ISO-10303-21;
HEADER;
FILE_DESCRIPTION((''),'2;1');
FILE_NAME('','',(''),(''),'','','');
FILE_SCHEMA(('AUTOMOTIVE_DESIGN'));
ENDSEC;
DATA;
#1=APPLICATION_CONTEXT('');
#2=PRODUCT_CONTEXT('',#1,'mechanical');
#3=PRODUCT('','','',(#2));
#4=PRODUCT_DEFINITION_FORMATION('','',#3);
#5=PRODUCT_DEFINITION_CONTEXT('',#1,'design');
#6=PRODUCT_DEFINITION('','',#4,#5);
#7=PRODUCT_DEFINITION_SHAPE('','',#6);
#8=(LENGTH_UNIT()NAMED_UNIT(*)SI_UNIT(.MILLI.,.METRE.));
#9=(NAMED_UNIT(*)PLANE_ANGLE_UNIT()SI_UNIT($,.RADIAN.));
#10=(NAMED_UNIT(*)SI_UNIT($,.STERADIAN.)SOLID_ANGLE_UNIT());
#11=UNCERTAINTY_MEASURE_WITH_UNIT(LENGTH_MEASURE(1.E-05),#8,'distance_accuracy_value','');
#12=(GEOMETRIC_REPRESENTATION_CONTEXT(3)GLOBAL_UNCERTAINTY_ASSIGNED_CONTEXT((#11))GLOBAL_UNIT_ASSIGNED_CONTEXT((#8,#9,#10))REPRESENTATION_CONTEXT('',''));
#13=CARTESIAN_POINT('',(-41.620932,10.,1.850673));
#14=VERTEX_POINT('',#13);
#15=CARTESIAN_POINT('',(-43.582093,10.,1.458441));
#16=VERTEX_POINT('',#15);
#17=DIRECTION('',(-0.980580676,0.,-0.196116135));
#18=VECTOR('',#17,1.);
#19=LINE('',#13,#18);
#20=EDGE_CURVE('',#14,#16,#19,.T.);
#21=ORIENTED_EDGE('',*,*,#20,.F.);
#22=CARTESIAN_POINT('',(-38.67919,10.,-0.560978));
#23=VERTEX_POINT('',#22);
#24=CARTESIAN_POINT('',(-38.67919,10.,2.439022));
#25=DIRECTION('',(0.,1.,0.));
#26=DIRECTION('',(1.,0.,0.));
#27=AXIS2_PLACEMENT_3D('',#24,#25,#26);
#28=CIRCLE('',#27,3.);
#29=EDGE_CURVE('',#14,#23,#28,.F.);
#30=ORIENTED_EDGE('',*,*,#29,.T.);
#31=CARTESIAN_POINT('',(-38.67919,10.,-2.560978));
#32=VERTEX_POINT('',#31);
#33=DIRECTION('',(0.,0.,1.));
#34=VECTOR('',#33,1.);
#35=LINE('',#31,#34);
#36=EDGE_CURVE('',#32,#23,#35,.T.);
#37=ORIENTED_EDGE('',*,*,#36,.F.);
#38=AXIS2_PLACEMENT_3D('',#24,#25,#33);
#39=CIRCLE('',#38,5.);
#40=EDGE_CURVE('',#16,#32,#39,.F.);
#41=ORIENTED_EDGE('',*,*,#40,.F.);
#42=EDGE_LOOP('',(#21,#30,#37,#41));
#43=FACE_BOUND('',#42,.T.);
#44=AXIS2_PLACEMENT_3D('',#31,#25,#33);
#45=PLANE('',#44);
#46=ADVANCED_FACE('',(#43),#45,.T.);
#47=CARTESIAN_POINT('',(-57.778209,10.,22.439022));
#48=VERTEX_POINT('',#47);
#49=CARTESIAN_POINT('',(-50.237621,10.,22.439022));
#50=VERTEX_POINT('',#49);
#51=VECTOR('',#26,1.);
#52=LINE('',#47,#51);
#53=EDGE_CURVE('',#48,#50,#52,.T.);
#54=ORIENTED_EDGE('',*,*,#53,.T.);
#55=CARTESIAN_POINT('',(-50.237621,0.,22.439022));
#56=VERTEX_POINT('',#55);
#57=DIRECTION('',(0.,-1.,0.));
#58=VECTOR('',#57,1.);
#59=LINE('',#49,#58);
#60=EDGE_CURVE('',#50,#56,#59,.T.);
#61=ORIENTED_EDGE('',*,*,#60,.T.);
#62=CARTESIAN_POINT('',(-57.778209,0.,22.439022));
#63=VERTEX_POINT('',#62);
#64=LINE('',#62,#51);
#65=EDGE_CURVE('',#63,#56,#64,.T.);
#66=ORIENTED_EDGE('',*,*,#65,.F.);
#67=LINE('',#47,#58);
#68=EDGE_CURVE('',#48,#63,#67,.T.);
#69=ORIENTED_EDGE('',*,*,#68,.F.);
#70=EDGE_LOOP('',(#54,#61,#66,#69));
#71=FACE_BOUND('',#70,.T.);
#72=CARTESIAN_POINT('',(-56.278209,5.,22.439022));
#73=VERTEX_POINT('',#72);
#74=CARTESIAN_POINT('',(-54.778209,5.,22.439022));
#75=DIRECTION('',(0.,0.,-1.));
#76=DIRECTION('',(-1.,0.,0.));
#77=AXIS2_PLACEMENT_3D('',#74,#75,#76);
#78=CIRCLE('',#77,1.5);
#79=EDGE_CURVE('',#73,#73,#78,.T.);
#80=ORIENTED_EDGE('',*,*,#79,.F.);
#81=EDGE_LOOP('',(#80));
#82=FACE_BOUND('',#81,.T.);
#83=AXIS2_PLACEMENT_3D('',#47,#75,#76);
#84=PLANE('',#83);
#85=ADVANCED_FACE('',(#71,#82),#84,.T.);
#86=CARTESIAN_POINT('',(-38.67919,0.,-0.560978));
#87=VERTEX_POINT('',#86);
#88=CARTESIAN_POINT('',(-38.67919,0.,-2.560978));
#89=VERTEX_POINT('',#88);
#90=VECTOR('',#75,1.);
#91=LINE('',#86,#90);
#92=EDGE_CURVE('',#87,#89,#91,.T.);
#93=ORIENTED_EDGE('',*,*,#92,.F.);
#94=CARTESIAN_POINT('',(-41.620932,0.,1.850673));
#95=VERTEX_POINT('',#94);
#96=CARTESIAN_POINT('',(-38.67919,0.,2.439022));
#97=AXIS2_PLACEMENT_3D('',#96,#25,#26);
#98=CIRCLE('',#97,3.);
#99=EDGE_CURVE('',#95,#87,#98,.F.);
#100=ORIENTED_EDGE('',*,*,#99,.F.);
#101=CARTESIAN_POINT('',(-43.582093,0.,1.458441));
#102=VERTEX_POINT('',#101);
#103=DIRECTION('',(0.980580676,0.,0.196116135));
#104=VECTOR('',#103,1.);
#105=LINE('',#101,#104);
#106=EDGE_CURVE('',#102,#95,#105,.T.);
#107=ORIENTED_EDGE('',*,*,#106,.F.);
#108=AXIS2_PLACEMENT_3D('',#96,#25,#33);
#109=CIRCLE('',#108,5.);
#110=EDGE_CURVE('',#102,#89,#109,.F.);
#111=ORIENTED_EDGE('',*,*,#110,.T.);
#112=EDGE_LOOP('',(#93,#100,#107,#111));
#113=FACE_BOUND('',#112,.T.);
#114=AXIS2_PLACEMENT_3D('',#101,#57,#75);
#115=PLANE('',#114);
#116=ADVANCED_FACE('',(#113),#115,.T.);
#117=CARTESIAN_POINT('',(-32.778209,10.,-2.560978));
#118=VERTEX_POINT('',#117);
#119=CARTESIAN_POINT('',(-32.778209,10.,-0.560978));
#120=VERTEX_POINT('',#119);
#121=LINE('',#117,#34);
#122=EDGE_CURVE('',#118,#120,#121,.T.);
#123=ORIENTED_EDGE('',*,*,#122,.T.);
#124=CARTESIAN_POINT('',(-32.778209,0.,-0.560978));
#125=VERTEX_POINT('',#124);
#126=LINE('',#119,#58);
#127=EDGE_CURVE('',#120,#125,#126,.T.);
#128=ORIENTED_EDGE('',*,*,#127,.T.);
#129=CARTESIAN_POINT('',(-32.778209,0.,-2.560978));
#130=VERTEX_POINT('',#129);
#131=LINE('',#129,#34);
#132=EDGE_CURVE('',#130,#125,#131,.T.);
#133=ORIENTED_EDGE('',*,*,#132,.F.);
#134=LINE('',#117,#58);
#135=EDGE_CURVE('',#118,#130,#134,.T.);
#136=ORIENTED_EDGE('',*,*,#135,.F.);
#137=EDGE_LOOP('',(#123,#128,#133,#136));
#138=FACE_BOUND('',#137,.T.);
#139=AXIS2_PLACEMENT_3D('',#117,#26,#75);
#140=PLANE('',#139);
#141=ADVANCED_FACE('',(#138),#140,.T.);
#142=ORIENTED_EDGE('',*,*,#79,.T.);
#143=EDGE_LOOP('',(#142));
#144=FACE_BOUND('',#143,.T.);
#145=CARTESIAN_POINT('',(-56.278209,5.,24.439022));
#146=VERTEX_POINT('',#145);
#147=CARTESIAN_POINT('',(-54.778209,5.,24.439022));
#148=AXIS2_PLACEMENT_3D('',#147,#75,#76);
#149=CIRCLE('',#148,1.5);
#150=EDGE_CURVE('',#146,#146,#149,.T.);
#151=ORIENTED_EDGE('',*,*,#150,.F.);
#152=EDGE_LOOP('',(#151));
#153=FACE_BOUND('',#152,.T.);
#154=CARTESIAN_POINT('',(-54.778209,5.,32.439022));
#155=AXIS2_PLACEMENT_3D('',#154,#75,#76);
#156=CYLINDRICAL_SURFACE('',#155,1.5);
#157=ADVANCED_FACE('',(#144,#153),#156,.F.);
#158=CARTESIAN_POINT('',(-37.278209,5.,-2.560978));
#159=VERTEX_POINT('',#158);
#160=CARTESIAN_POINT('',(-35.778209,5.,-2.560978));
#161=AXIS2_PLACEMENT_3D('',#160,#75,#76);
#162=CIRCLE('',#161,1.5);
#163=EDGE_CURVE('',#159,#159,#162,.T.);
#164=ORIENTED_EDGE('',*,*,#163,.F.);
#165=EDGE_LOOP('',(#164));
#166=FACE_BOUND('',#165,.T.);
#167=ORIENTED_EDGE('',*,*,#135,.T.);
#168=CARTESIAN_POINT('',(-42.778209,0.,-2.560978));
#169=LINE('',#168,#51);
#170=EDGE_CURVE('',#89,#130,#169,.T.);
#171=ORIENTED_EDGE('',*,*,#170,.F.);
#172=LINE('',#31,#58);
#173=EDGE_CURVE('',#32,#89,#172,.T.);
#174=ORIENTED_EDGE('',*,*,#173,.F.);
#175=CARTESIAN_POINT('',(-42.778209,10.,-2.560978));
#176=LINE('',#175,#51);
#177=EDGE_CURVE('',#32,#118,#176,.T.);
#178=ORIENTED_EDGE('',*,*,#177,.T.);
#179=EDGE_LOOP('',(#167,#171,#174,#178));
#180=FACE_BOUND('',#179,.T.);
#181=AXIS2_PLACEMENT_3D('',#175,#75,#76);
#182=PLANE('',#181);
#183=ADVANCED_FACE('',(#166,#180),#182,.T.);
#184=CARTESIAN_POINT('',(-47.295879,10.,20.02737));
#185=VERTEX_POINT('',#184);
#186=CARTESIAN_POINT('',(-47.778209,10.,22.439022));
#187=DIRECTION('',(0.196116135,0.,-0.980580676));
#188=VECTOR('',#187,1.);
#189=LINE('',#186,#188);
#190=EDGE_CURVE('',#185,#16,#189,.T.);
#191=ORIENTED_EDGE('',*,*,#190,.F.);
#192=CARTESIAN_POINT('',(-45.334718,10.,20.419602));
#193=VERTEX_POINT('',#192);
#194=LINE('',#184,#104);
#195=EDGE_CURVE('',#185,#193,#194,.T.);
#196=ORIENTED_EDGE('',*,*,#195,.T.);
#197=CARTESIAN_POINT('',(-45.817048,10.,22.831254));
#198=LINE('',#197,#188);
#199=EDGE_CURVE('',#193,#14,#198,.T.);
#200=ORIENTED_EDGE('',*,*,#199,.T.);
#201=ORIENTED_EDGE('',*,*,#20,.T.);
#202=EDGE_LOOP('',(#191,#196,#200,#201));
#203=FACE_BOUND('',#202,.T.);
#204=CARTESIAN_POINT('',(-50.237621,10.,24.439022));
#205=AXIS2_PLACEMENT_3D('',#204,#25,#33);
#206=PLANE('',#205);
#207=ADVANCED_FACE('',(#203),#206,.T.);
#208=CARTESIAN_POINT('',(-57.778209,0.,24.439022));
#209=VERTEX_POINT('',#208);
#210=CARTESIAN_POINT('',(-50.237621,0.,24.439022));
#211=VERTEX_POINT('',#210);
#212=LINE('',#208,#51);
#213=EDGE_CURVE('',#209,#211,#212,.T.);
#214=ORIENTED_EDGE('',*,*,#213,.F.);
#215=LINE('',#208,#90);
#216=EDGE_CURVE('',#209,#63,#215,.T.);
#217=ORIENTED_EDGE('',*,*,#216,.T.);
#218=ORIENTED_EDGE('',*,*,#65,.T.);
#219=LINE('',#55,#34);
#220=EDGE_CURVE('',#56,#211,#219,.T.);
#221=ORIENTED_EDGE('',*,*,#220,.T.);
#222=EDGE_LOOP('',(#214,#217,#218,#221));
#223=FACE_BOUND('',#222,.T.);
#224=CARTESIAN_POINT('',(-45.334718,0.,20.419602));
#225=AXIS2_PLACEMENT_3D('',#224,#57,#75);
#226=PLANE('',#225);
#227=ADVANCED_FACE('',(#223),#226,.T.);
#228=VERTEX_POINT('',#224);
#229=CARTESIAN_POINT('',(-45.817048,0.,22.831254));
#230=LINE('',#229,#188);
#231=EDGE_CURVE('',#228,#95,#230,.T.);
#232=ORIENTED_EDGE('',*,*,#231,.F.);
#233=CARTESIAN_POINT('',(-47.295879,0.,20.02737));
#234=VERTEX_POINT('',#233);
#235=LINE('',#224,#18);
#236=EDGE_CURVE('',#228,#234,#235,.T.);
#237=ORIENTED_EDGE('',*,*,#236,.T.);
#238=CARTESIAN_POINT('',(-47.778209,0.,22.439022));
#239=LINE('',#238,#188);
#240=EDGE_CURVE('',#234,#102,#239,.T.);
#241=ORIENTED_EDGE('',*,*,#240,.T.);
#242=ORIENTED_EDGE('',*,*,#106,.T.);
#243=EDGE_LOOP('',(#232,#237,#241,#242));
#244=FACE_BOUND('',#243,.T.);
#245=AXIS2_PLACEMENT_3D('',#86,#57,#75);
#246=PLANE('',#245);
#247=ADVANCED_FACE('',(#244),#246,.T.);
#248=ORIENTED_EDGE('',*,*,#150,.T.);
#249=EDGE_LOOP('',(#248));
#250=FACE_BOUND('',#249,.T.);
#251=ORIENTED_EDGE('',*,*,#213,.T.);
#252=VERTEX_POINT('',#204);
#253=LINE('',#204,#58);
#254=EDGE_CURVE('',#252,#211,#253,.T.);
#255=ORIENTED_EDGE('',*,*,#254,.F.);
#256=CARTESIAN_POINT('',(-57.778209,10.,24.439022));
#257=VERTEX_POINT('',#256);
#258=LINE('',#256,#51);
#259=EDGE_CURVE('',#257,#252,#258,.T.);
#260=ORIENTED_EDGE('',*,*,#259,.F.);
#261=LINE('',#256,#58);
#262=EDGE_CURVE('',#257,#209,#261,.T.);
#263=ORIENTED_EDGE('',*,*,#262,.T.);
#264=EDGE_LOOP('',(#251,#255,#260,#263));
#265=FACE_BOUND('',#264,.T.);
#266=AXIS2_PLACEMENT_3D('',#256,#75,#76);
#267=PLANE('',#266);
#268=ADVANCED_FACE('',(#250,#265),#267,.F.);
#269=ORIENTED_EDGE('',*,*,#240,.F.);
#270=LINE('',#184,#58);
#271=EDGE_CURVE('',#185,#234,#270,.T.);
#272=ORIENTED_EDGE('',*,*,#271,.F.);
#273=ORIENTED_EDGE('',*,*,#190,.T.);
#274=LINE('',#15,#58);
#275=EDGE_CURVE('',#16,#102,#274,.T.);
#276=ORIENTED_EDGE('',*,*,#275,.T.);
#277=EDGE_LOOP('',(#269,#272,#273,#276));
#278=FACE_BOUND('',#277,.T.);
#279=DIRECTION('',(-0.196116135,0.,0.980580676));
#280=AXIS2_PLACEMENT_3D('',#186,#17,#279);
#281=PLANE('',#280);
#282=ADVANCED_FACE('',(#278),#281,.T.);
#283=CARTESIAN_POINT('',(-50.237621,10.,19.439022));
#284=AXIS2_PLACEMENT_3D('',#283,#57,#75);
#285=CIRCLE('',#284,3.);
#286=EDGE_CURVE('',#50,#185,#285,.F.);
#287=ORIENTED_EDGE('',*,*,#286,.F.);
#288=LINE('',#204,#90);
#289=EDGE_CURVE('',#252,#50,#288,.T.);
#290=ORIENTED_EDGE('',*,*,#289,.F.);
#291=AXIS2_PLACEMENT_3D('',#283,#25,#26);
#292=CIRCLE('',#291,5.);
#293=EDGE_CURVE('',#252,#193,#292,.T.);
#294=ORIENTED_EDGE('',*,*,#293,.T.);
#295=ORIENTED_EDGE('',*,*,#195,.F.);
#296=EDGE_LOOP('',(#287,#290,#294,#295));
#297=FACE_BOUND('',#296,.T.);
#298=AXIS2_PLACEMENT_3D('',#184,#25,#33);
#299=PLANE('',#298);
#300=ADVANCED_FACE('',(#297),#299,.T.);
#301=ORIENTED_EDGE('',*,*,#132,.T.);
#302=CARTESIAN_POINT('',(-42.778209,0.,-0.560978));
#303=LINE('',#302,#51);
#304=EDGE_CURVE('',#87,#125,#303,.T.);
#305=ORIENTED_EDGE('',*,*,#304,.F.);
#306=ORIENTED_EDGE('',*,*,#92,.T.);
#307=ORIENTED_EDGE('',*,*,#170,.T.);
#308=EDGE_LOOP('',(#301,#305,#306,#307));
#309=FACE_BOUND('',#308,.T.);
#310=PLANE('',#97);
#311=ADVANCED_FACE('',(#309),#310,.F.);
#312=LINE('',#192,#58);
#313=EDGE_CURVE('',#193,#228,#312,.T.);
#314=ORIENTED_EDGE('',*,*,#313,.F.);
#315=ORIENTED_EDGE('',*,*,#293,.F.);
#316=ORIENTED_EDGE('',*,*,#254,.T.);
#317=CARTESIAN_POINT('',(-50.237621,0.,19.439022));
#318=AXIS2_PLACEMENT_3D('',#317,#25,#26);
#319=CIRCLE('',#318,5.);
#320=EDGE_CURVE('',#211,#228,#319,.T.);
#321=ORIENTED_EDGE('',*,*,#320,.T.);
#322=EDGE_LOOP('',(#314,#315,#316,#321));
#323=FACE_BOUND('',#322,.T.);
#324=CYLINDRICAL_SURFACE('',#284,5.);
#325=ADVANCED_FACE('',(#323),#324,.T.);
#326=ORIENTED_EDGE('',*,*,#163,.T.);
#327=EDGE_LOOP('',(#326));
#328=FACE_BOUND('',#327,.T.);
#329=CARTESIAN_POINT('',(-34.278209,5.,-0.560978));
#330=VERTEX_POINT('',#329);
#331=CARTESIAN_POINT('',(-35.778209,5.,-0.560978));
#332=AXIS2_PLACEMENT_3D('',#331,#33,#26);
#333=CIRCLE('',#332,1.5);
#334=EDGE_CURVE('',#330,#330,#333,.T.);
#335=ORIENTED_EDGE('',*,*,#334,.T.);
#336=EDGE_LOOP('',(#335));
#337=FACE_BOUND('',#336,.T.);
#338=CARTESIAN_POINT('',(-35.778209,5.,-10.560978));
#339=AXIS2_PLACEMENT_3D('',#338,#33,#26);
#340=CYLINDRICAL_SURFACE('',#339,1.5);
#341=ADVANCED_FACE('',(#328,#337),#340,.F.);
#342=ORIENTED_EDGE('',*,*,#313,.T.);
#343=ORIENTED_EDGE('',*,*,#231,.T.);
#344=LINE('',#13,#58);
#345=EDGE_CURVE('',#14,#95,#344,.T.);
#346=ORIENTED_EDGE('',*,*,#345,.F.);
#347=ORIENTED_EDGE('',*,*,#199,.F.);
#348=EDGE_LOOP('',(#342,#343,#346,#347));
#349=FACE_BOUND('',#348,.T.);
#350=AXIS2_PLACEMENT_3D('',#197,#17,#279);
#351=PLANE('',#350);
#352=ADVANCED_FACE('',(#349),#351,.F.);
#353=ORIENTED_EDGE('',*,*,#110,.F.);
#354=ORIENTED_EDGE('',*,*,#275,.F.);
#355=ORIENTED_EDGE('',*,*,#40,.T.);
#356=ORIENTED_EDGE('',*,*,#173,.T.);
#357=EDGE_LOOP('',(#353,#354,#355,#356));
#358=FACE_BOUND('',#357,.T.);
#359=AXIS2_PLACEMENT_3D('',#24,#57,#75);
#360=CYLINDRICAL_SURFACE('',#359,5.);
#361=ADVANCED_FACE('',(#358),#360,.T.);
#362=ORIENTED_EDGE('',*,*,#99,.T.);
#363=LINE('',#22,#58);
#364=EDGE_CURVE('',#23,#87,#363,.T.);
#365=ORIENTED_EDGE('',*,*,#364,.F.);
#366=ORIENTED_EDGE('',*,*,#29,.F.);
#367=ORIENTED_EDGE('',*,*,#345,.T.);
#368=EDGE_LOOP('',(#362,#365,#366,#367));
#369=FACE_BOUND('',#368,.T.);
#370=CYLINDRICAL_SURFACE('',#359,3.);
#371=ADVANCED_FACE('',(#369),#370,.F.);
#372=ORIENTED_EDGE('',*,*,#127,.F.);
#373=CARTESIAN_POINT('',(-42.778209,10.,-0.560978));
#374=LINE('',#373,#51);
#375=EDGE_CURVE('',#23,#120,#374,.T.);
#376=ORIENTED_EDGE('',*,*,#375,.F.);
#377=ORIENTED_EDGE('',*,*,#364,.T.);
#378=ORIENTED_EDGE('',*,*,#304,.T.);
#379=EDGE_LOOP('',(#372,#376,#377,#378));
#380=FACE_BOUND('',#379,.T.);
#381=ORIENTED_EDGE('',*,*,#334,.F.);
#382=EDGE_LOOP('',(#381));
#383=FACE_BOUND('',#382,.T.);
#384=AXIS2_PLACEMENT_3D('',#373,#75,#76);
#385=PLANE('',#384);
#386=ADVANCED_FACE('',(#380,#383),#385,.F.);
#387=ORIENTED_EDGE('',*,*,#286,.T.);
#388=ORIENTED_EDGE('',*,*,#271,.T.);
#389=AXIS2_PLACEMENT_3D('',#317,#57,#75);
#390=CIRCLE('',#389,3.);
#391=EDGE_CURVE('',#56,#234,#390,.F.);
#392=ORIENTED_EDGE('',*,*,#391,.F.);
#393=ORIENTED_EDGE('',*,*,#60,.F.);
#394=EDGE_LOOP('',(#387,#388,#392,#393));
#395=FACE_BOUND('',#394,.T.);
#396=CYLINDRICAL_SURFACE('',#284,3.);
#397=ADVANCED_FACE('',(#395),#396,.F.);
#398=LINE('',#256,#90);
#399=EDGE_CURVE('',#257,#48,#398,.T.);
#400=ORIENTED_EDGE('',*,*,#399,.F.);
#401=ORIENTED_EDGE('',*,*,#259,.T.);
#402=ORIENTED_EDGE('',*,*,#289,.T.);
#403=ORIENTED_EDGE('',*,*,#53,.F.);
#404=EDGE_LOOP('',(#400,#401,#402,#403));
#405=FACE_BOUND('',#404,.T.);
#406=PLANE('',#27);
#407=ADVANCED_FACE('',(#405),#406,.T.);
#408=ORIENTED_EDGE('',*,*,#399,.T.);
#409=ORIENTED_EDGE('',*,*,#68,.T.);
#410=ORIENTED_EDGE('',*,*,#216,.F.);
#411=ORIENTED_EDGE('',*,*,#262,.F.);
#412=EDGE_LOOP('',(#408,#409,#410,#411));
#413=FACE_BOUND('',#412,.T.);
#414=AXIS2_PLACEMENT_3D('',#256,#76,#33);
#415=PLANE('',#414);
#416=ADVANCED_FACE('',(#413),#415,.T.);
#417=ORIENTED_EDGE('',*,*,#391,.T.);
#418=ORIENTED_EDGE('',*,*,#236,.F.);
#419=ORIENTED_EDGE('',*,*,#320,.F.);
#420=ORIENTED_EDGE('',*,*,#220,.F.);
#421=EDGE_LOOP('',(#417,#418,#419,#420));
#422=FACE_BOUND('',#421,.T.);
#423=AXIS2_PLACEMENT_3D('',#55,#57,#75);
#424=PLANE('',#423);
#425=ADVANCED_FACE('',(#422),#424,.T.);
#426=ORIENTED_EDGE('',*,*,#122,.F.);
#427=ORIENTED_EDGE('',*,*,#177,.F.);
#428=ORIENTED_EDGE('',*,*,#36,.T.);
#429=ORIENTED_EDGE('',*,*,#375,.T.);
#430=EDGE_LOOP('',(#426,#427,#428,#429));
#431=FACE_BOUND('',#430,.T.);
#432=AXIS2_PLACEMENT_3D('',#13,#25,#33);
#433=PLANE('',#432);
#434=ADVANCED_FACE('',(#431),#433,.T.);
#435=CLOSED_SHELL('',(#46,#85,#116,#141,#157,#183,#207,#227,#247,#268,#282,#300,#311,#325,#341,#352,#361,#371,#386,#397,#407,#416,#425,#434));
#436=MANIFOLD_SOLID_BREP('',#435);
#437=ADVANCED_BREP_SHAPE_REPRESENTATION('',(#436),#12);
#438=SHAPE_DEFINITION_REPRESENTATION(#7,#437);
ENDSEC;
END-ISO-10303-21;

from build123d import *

# Parameters (mm, degrees)
SM_BASE_FLANGE_1_DEPTH = 10
SKETCH_9_R             = 1.5
CUT_EXTRUDE_1_DEPTH    = 10
SKETCH_10_R            = 1.5
CUT_EXTRUDE_2_DEPTH    = 10


# Sheet-metal steps are written as plain solids
with BuildPart() as part:
    # 草图4 → 基体-法兰1 (new body)
    with BuildSketch(Plane(origin=(0, 0, 0), x_dir=(1, 0, 0), z_dir=(0, 1, 0))):
        with BuildLine():
            Line((-57.778209212, -22.439021502), (-50.237620921, -22.439021502))
            ThreePointArc((-50.237620921, -22.439021502), (-48.335654204, -21.759047926), (-47.295878894, -20.027369908))
            Line((-47.295878894, -20.027369908), (-43.582093077, -1.458440827))
            ThreePointArc((-43.582093077, -1.458440827), (-41.849134227, 1.427689204), (-38.679189699, 2.560978498))
            Line((-38.679189699, 2.560978498), (-32.778209212, 2.560978498))
            Line((-32.778209212, 2.560978498), (-32.778209212, 0.560978498))
            Line((-32.778209212, 0.560978498), (-38.679189699, 0.560978498))
            ThreePointArc((-38.679189699, 0.560978498), (-40.581156416, -0.118995078), (-41.620931726, -1.850673097))
            Line((-41.620931726, -1.850673097), (-45.334717542, -20.419602178))
            ThreePointArc((-45.334717542, -20.419602178), (-47.067676393, -23.305732209), (-50.237620921, -24.439021502))
            Line((-50.237620921, -24.439021502), (-57.778209212, -24.439021502))
            Line((-57.778209212, -24.439021502), (-57.778209212, -22.439021502))
        make_face()
    extrude(amount=SM_BASE_FLANGE_1_DEPTH)

    # 草图9 → 切除-拉伸1 (cut)
    with BuildSketch(Plane(origin=(0, 0, 22.439021502), x_dir=(-1, 0, 0), z_dir=(0, 0, -1))):
        with Locations((54.778209212, 5)):
            Circle(SKETCH_9_R)
    extrude(amount=-CUT_EXTRUDE_1_DEPTH, mode=Mode.SUBTRACT)

    # 草图10 → 切除-拉伸2 (cut)
    with BuildSketch(Plane.XY.offset(-0.560978498)):
        with Locations((-35.778209212, 5)):
            Circle(SKETCH_10_R)
    extrude(amount=-CUT_EXTRUDE_2_DEPTH, mode=Mode.SUBTRACT)


solid = part.part
